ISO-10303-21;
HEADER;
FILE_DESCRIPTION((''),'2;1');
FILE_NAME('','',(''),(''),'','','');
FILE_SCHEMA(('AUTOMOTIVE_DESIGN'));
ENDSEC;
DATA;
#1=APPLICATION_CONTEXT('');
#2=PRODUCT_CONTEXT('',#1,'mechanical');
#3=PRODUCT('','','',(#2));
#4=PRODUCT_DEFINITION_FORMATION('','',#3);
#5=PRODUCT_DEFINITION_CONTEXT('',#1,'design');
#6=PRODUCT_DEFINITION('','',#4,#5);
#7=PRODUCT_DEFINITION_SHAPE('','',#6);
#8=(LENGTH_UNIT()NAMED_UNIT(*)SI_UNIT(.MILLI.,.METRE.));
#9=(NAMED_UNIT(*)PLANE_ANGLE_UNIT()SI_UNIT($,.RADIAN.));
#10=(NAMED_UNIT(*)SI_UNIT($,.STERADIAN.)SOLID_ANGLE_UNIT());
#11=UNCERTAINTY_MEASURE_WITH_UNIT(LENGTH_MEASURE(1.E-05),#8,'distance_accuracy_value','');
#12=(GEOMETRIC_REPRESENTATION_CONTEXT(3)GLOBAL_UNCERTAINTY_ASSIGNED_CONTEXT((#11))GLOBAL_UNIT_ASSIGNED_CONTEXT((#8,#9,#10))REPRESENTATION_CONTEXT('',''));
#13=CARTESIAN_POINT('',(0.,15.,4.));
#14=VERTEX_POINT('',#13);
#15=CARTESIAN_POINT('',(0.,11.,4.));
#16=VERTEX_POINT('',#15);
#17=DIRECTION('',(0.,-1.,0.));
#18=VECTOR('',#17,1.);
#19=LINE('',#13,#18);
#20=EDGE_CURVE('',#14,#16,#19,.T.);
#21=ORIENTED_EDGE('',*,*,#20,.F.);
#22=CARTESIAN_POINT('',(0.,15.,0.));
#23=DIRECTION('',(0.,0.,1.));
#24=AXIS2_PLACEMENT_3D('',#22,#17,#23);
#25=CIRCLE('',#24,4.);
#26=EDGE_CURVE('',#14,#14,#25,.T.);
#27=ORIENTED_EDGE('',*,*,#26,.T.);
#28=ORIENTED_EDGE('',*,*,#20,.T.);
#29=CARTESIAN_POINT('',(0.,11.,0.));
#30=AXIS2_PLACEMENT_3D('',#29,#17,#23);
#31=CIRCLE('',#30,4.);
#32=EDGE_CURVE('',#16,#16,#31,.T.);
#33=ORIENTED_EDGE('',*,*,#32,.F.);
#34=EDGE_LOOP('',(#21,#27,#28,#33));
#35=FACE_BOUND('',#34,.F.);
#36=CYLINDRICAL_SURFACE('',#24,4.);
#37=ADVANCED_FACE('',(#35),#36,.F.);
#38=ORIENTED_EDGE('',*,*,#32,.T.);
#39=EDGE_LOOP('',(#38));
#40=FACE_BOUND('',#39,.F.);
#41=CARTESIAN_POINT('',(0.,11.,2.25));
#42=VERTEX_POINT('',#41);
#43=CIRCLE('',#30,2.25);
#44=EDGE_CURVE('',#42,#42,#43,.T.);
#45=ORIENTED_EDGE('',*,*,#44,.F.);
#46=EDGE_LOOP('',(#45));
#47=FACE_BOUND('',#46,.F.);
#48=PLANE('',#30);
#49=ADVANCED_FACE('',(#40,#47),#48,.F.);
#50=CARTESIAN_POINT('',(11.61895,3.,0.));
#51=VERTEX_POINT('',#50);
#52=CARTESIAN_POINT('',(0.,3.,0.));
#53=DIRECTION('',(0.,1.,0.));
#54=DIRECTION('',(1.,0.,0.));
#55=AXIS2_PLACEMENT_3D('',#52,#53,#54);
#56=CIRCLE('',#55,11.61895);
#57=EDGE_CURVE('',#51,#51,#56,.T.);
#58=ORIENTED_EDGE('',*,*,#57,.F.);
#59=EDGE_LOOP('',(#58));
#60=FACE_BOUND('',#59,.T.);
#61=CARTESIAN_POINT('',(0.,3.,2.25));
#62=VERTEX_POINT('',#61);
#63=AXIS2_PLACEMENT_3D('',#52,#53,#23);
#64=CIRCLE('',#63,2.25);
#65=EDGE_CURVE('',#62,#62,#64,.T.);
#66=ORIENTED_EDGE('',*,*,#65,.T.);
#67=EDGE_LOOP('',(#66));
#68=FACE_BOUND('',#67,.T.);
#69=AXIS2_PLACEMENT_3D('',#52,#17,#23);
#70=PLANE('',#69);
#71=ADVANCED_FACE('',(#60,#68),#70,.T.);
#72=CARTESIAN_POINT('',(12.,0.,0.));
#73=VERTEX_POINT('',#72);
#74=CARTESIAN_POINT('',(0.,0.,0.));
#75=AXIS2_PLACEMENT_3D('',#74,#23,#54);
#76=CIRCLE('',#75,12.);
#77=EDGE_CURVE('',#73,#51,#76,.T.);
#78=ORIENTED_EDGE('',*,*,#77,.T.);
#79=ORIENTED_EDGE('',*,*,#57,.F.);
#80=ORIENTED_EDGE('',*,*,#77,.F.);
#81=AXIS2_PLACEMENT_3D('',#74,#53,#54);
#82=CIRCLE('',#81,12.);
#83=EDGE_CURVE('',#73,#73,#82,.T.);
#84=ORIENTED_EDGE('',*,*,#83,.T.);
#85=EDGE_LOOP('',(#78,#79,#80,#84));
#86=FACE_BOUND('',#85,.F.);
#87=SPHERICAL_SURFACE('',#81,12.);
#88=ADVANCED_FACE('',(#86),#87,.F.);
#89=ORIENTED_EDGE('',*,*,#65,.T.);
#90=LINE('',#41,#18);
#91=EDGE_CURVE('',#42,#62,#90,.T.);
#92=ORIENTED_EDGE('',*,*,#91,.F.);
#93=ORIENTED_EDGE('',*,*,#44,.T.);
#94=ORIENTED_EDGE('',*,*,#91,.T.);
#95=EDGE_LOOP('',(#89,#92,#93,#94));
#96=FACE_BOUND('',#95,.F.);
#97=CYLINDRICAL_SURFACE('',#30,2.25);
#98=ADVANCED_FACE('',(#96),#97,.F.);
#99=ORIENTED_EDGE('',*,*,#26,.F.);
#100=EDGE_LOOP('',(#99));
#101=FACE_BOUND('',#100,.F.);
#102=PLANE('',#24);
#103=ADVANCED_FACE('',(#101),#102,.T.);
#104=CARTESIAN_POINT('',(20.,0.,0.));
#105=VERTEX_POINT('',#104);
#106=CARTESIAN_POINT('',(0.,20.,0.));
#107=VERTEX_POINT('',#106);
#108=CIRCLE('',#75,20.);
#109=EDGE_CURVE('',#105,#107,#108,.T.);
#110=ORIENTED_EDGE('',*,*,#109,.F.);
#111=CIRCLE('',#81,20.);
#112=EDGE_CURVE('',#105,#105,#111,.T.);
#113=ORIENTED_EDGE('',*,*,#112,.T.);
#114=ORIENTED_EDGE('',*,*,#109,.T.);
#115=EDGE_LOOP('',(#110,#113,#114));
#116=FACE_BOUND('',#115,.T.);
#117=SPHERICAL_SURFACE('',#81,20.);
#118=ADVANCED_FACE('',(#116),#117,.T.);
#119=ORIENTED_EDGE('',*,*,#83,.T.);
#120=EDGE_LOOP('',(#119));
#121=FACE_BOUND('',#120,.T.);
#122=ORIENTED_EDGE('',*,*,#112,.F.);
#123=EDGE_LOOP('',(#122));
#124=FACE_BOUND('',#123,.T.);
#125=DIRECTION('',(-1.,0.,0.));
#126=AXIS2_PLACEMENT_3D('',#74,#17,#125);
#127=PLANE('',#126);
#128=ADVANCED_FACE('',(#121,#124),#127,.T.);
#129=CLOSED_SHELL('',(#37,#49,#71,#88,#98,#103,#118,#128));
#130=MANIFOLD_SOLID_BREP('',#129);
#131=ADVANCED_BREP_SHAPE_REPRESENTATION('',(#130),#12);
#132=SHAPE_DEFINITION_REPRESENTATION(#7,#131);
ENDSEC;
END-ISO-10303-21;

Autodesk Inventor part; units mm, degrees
ref_plane "YZ Plane" through (0, 0, 0) normal (1, 0, 0) x (0, 1, 0)
ref_plane "XY Plane" through (0, 0, 0) normal (0, 0, 1) x (1, 0, 0)
sketch "Sketch1" plane through (0, 0, 0) normal (0, 0, 1) x (1, 0, 0)
  line L0 (0, 0) -> (0, 20)
  line L1 (0, 0) -> (20, 0)
  arc A0 (20, 0) -> (0, 20) centre (0, 0) ccw
  line L2 (0, -4.8284) -> (0, 28.9706) projected
  dimension "d2" = 20
revolve "Revolution1" add sketch "Sketch1" angle 360 about axis through (0, -10, 0) along (0, 1, 0)
ref_plane "Work Plane1" through (0, 15, 0) normal (0, 1, 0) x (-1, 0, 0)
sketch "Sketch2" plane through (0, 15, 0) normal (0, 1, 0) x (-1, 0, 0)
  point P0 (0, 0)
  point P1 (0, 0)
hole "Hole1" at (0, 15, 0) direction (0, -1, 0) diameter 4.5 end through all counterbore diameter 8 counterbore depth 4 clearance for "Socket Head Cap Screw" size "M4" standard "Ansi Metric M Profile"
shell "Shell1" thickness 8 removed faces 1 at (13.8841, 0, 1.6858)
sketch "Sketch3" plane through (0, 0, 0) normal (0, -1, 0) x (1, 0, 0)
  circle A0 centre (0, 0) radius 10.25 projected
  circle A1 centre (0, 0) radius 2.25 projected
extrude "Extrusion1" cut sketch "Sketch3" against normal blind 3
properties part number "Ball_Upper Half" material "Nylon 6/6"
